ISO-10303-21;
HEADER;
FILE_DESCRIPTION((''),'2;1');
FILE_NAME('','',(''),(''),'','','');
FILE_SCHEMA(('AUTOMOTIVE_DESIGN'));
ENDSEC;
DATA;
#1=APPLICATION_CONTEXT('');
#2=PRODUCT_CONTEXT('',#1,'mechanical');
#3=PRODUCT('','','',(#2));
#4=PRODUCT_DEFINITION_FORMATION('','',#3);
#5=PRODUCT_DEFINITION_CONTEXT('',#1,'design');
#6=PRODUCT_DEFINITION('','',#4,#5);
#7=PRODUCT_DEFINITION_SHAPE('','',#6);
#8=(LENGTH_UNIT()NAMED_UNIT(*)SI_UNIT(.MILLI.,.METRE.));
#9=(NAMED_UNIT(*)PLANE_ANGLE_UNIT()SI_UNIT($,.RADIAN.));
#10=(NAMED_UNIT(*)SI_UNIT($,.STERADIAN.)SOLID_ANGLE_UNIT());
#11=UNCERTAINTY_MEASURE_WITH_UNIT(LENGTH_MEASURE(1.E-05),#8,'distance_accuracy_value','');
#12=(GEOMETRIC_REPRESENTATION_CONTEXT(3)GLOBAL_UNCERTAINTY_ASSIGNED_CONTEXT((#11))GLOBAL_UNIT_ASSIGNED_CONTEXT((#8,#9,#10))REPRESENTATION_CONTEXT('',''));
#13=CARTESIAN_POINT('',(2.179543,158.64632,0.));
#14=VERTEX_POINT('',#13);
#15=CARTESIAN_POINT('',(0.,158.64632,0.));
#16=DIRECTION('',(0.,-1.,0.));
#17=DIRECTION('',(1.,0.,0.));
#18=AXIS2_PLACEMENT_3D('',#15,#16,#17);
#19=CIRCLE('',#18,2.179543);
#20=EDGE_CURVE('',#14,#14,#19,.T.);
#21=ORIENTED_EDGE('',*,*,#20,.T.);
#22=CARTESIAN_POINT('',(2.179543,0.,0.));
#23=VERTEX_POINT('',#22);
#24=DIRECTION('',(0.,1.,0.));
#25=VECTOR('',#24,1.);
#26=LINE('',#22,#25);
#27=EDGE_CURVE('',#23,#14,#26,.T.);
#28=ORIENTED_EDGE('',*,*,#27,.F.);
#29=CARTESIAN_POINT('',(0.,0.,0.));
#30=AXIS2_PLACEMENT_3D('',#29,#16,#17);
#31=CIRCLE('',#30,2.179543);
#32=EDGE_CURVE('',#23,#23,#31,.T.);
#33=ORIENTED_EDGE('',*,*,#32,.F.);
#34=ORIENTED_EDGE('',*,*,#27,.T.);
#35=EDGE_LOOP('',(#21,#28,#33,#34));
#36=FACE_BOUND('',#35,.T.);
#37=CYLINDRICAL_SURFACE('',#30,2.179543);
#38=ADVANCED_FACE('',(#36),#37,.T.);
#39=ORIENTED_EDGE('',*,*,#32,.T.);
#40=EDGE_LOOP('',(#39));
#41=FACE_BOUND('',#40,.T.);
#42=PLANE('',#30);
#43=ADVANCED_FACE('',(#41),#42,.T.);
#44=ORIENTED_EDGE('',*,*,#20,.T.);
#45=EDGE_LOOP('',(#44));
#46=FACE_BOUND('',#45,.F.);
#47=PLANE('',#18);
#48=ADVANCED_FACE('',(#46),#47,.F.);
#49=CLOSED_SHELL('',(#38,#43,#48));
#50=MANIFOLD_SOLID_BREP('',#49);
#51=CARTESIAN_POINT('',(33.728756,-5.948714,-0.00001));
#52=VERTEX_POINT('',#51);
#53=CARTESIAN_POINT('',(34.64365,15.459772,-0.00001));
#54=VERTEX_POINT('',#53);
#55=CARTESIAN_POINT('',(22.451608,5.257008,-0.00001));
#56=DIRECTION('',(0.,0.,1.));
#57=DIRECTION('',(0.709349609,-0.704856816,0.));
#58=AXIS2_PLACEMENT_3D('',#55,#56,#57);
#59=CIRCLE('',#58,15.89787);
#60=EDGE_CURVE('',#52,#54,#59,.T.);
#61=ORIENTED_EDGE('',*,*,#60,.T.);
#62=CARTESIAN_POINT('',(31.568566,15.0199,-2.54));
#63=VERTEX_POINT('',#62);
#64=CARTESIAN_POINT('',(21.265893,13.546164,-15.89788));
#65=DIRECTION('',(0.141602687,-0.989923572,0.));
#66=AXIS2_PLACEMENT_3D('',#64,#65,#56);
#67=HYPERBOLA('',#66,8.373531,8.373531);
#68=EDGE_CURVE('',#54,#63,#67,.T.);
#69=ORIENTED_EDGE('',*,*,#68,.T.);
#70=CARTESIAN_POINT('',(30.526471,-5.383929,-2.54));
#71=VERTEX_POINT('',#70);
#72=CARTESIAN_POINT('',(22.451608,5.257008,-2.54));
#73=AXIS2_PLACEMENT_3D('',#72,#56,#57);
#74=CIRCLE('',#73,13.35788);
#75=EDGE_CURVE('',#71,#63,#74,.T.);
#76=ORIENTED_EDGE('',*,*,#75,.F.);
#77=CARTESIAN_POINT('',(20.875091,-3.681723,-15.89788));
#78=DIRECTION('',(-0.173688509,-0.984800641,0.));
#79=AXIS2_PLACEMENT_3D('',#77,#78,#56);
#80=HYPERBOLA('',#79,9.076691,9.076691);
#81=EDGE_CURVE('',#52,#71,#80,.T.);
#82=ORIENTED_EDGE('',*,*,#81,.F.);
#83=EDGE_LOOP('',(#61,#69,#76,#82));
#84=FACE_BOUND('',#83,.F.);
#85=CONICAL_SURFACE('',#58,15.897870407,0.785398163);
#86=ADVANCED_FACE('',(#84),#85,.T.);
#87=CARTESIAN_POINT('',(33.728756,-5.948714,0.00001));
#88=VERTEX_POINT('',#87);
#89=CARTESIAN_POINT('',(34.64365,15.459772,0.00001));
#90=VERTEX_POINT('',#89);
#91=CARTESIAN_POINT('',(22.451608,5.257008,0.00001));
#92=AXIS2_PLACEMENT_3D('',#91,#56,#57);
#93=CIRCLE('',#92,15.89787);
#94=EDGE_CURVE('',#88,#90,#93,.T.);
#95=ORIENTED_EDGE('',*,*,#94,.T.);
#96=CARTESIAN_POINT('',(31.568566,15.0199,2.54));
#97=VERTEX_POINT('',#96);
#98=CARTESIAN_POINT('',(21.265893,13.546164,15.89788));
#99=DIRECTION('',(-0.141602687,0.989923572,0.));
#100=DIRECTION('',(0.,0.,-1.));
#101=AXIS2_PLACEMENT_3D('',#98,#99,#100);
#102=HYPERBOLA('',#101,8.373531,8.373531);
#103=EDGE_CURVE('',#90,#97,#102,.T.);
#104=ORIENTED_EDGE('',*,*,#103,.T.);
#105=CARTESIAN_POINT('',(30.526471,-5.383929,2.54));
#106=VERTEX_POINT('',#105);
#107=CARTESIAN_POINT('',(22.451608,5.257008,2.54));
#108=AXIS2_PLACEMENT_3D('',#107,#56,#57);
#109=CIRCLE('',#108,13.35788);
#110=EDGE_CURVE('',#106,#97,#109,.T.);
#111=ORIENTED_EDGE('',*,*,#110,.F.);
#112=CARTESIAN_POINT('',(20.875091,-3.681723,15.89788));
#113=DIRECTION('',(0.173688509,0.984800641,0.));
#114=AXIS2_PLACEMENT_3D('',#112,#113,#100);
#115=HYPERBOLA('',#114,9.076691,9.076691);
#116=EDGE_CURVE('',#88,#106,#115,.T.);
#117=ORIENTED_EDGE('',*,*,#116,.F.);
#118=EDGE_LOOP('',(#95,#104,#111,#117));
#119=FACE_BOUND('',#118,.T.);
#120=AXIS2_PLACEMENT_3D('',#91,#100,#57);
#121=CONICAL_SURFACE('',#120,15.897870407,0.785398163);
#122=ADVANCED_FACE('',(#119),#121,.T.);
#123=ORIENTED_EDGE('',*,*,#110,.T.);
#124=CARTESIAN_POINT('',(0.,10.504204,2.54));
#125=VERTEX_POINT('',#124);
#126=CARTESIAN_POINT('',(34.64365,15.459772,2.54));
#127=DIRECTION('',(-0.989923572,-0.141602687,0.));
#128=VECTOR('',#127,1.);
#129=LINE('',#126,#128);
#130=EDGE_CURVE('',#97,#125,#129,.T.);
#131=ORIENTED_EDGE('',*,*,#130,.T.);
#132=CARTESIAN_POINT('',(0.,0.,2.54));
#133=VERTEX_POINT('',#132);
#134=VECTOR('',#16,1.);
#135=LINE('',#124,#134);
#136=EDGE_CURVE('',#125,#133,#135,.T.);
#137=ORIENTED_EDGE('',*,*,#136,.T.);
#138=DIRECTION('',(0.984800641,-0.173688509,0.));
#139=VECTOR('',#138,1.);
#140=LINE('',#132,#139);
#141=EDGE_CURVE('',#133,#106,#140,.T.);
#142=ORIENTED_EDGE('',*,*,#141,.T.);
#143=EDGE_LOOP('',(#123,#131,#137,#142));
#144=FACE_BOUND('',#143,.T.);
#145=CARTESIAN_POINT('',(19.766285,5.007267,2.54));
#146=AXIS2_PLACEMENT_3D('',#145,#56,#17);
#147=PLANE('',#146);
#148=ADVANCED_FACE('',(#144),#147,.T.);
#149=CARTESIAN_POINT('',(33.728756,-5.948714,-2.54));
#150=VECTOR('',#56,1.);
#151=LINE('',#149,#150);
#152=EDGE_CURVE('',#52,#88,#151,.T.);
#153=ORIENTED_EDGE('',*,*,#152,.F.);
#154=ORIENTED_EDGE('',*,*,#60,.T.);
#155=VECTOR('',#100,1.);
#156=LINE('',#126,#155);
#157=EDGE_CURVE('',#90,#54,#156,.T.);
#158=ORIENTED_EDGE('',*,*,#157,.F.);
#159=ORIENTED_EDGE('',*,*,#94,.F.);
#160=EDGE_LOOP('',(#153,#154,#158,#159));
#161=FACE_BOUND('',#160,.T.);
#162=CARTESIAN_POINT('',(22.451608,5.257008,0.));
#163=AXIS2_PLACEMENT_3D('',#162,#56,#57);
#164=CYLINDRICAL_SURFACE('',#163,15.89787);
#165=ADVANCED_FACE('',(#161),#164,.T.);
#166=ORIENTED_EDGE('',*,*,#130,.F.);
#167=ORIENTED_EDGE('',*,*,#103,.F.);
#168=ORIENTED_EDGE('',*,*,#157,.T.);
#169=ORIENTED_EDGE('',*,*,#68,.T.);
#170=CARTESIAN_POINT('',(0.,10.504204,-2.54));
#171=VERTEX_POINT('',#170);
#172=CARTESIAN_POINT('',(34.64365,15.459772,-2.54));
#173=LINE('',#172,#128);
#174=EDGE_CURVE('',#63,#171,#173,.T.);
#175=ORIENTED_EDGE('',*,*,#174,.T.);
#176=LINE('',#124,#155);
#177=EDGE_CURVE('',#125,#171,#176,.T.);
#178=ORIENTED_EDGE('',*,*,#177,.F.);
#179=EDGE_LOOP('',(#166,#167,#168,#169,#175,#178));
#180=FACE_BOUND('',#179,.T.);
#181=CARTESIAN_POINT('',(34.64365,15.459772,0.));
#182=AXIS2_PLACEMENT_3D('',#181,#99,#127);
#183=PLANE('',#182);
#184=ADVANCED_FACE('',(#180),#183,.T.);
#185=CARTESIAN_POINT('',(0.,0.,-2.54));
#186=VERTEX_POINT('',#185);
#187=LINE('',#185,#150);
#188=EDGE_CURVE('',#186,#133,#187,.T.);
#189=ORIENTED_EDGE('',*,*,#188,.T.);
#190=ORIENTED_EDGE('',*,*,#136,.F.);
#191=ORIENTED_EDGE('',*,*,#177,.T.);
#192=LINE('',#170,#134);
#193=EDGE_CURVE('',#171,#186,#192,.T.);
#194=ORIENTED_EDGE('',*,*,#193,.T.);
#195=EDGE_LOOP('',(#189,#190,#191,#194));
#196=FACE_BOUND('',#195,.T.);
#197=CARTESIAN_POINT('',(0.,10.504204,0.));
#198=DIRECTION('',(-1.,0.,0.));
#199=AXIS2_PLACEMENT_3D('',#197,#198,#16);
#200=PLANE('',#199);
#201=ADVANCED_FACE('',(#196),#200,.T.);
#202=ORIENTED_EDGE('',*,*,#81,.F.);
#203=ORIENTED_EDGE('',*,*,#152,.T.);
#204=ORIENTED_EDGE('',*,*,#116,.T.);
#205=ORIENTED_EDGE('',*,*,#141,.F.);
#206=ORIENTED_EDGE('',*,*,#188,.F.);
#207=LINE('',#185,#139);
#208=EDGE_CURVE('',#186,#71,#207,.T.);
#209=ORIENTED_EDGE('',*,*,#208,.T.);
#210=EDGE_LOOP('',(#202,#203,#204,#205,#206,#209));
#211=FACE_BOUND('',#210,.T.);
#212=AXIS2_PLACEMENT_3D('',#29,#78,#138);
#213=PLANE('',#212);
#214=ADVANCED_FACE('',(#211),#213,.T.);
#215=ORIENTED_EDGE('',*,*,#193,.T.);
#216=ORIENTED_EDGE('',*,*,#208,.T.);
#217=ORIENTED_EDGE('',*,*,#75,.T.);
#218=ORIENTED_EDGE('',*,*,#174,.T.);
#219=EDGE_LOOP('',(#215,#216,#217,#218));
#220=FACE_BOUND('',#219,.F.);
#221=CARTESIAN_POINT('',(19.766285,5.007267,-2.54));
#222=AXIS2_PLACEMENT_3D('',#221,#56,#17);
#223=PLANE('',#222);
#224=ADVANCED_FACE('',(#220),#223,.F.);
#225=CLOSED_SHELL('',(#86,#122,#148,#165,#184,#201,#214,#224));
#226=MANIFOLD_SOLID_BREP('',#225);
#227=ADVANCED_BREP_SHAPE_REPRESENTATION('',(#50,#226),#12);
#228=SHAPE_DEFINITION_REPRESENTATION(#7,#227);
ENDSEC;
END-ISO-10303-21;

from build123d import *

# Parameters (mm, degrees)
F0_R          = 2.179542758
F1_DEPTH      = 158.64632
F3_DEPTH      = 2.54
F3_DEPTH_BACK = 2.54
F4_SIZE       = 2.53999


# Not quite as in the source:
# - a fillet or chamfer is up to 0.001 mm smaller than in the source, because OpenCascade refuses the exact size


with BuildPart() as f1:
    # F0 (on Front) → F1 (new body)
    with BuildSketch(Plane.XZ):
        Circle(F0_R)
    extrude(amount=-F1_DEPTH)


with BuildPart() as f3:
    # F2 (on Top) → F3 (new body, two sides)
    with BuildSketch(Plane.XY) as f3_sk:
        with BuildLine():
            Line((0, 10.5042038485), (0, 0))
            Line((0, 0), (33.7287560105, -5.9487139806))
            ThreePointArc((33.7287560105, -5.9487139806), (38.33498105, 4.5782306181), (34.6436500549, 15.4597721994))
            Line((34.6436500549, 15.4597721994), (0, 10.5042038485))
        make_face()
    extrude(amount=F3_DEPTH)
    extrude(f3_sk.sketch, amount=-F3_DEPTH_BACK)

    # F4 (size 2.54 in the source; OpenCascade refuses exactly that, so slightly less here)
    f4_edges = [f3.edges().sort_by_distance(p)[0] for p in [
        (38.334981, 4.578231, -2.54),
        (38.334981, 4.578231, 2.54),
    ]]
    chamfer(f4_edges, length=F4_SIZE)


solid = Compound([f1.part, f3.part])
